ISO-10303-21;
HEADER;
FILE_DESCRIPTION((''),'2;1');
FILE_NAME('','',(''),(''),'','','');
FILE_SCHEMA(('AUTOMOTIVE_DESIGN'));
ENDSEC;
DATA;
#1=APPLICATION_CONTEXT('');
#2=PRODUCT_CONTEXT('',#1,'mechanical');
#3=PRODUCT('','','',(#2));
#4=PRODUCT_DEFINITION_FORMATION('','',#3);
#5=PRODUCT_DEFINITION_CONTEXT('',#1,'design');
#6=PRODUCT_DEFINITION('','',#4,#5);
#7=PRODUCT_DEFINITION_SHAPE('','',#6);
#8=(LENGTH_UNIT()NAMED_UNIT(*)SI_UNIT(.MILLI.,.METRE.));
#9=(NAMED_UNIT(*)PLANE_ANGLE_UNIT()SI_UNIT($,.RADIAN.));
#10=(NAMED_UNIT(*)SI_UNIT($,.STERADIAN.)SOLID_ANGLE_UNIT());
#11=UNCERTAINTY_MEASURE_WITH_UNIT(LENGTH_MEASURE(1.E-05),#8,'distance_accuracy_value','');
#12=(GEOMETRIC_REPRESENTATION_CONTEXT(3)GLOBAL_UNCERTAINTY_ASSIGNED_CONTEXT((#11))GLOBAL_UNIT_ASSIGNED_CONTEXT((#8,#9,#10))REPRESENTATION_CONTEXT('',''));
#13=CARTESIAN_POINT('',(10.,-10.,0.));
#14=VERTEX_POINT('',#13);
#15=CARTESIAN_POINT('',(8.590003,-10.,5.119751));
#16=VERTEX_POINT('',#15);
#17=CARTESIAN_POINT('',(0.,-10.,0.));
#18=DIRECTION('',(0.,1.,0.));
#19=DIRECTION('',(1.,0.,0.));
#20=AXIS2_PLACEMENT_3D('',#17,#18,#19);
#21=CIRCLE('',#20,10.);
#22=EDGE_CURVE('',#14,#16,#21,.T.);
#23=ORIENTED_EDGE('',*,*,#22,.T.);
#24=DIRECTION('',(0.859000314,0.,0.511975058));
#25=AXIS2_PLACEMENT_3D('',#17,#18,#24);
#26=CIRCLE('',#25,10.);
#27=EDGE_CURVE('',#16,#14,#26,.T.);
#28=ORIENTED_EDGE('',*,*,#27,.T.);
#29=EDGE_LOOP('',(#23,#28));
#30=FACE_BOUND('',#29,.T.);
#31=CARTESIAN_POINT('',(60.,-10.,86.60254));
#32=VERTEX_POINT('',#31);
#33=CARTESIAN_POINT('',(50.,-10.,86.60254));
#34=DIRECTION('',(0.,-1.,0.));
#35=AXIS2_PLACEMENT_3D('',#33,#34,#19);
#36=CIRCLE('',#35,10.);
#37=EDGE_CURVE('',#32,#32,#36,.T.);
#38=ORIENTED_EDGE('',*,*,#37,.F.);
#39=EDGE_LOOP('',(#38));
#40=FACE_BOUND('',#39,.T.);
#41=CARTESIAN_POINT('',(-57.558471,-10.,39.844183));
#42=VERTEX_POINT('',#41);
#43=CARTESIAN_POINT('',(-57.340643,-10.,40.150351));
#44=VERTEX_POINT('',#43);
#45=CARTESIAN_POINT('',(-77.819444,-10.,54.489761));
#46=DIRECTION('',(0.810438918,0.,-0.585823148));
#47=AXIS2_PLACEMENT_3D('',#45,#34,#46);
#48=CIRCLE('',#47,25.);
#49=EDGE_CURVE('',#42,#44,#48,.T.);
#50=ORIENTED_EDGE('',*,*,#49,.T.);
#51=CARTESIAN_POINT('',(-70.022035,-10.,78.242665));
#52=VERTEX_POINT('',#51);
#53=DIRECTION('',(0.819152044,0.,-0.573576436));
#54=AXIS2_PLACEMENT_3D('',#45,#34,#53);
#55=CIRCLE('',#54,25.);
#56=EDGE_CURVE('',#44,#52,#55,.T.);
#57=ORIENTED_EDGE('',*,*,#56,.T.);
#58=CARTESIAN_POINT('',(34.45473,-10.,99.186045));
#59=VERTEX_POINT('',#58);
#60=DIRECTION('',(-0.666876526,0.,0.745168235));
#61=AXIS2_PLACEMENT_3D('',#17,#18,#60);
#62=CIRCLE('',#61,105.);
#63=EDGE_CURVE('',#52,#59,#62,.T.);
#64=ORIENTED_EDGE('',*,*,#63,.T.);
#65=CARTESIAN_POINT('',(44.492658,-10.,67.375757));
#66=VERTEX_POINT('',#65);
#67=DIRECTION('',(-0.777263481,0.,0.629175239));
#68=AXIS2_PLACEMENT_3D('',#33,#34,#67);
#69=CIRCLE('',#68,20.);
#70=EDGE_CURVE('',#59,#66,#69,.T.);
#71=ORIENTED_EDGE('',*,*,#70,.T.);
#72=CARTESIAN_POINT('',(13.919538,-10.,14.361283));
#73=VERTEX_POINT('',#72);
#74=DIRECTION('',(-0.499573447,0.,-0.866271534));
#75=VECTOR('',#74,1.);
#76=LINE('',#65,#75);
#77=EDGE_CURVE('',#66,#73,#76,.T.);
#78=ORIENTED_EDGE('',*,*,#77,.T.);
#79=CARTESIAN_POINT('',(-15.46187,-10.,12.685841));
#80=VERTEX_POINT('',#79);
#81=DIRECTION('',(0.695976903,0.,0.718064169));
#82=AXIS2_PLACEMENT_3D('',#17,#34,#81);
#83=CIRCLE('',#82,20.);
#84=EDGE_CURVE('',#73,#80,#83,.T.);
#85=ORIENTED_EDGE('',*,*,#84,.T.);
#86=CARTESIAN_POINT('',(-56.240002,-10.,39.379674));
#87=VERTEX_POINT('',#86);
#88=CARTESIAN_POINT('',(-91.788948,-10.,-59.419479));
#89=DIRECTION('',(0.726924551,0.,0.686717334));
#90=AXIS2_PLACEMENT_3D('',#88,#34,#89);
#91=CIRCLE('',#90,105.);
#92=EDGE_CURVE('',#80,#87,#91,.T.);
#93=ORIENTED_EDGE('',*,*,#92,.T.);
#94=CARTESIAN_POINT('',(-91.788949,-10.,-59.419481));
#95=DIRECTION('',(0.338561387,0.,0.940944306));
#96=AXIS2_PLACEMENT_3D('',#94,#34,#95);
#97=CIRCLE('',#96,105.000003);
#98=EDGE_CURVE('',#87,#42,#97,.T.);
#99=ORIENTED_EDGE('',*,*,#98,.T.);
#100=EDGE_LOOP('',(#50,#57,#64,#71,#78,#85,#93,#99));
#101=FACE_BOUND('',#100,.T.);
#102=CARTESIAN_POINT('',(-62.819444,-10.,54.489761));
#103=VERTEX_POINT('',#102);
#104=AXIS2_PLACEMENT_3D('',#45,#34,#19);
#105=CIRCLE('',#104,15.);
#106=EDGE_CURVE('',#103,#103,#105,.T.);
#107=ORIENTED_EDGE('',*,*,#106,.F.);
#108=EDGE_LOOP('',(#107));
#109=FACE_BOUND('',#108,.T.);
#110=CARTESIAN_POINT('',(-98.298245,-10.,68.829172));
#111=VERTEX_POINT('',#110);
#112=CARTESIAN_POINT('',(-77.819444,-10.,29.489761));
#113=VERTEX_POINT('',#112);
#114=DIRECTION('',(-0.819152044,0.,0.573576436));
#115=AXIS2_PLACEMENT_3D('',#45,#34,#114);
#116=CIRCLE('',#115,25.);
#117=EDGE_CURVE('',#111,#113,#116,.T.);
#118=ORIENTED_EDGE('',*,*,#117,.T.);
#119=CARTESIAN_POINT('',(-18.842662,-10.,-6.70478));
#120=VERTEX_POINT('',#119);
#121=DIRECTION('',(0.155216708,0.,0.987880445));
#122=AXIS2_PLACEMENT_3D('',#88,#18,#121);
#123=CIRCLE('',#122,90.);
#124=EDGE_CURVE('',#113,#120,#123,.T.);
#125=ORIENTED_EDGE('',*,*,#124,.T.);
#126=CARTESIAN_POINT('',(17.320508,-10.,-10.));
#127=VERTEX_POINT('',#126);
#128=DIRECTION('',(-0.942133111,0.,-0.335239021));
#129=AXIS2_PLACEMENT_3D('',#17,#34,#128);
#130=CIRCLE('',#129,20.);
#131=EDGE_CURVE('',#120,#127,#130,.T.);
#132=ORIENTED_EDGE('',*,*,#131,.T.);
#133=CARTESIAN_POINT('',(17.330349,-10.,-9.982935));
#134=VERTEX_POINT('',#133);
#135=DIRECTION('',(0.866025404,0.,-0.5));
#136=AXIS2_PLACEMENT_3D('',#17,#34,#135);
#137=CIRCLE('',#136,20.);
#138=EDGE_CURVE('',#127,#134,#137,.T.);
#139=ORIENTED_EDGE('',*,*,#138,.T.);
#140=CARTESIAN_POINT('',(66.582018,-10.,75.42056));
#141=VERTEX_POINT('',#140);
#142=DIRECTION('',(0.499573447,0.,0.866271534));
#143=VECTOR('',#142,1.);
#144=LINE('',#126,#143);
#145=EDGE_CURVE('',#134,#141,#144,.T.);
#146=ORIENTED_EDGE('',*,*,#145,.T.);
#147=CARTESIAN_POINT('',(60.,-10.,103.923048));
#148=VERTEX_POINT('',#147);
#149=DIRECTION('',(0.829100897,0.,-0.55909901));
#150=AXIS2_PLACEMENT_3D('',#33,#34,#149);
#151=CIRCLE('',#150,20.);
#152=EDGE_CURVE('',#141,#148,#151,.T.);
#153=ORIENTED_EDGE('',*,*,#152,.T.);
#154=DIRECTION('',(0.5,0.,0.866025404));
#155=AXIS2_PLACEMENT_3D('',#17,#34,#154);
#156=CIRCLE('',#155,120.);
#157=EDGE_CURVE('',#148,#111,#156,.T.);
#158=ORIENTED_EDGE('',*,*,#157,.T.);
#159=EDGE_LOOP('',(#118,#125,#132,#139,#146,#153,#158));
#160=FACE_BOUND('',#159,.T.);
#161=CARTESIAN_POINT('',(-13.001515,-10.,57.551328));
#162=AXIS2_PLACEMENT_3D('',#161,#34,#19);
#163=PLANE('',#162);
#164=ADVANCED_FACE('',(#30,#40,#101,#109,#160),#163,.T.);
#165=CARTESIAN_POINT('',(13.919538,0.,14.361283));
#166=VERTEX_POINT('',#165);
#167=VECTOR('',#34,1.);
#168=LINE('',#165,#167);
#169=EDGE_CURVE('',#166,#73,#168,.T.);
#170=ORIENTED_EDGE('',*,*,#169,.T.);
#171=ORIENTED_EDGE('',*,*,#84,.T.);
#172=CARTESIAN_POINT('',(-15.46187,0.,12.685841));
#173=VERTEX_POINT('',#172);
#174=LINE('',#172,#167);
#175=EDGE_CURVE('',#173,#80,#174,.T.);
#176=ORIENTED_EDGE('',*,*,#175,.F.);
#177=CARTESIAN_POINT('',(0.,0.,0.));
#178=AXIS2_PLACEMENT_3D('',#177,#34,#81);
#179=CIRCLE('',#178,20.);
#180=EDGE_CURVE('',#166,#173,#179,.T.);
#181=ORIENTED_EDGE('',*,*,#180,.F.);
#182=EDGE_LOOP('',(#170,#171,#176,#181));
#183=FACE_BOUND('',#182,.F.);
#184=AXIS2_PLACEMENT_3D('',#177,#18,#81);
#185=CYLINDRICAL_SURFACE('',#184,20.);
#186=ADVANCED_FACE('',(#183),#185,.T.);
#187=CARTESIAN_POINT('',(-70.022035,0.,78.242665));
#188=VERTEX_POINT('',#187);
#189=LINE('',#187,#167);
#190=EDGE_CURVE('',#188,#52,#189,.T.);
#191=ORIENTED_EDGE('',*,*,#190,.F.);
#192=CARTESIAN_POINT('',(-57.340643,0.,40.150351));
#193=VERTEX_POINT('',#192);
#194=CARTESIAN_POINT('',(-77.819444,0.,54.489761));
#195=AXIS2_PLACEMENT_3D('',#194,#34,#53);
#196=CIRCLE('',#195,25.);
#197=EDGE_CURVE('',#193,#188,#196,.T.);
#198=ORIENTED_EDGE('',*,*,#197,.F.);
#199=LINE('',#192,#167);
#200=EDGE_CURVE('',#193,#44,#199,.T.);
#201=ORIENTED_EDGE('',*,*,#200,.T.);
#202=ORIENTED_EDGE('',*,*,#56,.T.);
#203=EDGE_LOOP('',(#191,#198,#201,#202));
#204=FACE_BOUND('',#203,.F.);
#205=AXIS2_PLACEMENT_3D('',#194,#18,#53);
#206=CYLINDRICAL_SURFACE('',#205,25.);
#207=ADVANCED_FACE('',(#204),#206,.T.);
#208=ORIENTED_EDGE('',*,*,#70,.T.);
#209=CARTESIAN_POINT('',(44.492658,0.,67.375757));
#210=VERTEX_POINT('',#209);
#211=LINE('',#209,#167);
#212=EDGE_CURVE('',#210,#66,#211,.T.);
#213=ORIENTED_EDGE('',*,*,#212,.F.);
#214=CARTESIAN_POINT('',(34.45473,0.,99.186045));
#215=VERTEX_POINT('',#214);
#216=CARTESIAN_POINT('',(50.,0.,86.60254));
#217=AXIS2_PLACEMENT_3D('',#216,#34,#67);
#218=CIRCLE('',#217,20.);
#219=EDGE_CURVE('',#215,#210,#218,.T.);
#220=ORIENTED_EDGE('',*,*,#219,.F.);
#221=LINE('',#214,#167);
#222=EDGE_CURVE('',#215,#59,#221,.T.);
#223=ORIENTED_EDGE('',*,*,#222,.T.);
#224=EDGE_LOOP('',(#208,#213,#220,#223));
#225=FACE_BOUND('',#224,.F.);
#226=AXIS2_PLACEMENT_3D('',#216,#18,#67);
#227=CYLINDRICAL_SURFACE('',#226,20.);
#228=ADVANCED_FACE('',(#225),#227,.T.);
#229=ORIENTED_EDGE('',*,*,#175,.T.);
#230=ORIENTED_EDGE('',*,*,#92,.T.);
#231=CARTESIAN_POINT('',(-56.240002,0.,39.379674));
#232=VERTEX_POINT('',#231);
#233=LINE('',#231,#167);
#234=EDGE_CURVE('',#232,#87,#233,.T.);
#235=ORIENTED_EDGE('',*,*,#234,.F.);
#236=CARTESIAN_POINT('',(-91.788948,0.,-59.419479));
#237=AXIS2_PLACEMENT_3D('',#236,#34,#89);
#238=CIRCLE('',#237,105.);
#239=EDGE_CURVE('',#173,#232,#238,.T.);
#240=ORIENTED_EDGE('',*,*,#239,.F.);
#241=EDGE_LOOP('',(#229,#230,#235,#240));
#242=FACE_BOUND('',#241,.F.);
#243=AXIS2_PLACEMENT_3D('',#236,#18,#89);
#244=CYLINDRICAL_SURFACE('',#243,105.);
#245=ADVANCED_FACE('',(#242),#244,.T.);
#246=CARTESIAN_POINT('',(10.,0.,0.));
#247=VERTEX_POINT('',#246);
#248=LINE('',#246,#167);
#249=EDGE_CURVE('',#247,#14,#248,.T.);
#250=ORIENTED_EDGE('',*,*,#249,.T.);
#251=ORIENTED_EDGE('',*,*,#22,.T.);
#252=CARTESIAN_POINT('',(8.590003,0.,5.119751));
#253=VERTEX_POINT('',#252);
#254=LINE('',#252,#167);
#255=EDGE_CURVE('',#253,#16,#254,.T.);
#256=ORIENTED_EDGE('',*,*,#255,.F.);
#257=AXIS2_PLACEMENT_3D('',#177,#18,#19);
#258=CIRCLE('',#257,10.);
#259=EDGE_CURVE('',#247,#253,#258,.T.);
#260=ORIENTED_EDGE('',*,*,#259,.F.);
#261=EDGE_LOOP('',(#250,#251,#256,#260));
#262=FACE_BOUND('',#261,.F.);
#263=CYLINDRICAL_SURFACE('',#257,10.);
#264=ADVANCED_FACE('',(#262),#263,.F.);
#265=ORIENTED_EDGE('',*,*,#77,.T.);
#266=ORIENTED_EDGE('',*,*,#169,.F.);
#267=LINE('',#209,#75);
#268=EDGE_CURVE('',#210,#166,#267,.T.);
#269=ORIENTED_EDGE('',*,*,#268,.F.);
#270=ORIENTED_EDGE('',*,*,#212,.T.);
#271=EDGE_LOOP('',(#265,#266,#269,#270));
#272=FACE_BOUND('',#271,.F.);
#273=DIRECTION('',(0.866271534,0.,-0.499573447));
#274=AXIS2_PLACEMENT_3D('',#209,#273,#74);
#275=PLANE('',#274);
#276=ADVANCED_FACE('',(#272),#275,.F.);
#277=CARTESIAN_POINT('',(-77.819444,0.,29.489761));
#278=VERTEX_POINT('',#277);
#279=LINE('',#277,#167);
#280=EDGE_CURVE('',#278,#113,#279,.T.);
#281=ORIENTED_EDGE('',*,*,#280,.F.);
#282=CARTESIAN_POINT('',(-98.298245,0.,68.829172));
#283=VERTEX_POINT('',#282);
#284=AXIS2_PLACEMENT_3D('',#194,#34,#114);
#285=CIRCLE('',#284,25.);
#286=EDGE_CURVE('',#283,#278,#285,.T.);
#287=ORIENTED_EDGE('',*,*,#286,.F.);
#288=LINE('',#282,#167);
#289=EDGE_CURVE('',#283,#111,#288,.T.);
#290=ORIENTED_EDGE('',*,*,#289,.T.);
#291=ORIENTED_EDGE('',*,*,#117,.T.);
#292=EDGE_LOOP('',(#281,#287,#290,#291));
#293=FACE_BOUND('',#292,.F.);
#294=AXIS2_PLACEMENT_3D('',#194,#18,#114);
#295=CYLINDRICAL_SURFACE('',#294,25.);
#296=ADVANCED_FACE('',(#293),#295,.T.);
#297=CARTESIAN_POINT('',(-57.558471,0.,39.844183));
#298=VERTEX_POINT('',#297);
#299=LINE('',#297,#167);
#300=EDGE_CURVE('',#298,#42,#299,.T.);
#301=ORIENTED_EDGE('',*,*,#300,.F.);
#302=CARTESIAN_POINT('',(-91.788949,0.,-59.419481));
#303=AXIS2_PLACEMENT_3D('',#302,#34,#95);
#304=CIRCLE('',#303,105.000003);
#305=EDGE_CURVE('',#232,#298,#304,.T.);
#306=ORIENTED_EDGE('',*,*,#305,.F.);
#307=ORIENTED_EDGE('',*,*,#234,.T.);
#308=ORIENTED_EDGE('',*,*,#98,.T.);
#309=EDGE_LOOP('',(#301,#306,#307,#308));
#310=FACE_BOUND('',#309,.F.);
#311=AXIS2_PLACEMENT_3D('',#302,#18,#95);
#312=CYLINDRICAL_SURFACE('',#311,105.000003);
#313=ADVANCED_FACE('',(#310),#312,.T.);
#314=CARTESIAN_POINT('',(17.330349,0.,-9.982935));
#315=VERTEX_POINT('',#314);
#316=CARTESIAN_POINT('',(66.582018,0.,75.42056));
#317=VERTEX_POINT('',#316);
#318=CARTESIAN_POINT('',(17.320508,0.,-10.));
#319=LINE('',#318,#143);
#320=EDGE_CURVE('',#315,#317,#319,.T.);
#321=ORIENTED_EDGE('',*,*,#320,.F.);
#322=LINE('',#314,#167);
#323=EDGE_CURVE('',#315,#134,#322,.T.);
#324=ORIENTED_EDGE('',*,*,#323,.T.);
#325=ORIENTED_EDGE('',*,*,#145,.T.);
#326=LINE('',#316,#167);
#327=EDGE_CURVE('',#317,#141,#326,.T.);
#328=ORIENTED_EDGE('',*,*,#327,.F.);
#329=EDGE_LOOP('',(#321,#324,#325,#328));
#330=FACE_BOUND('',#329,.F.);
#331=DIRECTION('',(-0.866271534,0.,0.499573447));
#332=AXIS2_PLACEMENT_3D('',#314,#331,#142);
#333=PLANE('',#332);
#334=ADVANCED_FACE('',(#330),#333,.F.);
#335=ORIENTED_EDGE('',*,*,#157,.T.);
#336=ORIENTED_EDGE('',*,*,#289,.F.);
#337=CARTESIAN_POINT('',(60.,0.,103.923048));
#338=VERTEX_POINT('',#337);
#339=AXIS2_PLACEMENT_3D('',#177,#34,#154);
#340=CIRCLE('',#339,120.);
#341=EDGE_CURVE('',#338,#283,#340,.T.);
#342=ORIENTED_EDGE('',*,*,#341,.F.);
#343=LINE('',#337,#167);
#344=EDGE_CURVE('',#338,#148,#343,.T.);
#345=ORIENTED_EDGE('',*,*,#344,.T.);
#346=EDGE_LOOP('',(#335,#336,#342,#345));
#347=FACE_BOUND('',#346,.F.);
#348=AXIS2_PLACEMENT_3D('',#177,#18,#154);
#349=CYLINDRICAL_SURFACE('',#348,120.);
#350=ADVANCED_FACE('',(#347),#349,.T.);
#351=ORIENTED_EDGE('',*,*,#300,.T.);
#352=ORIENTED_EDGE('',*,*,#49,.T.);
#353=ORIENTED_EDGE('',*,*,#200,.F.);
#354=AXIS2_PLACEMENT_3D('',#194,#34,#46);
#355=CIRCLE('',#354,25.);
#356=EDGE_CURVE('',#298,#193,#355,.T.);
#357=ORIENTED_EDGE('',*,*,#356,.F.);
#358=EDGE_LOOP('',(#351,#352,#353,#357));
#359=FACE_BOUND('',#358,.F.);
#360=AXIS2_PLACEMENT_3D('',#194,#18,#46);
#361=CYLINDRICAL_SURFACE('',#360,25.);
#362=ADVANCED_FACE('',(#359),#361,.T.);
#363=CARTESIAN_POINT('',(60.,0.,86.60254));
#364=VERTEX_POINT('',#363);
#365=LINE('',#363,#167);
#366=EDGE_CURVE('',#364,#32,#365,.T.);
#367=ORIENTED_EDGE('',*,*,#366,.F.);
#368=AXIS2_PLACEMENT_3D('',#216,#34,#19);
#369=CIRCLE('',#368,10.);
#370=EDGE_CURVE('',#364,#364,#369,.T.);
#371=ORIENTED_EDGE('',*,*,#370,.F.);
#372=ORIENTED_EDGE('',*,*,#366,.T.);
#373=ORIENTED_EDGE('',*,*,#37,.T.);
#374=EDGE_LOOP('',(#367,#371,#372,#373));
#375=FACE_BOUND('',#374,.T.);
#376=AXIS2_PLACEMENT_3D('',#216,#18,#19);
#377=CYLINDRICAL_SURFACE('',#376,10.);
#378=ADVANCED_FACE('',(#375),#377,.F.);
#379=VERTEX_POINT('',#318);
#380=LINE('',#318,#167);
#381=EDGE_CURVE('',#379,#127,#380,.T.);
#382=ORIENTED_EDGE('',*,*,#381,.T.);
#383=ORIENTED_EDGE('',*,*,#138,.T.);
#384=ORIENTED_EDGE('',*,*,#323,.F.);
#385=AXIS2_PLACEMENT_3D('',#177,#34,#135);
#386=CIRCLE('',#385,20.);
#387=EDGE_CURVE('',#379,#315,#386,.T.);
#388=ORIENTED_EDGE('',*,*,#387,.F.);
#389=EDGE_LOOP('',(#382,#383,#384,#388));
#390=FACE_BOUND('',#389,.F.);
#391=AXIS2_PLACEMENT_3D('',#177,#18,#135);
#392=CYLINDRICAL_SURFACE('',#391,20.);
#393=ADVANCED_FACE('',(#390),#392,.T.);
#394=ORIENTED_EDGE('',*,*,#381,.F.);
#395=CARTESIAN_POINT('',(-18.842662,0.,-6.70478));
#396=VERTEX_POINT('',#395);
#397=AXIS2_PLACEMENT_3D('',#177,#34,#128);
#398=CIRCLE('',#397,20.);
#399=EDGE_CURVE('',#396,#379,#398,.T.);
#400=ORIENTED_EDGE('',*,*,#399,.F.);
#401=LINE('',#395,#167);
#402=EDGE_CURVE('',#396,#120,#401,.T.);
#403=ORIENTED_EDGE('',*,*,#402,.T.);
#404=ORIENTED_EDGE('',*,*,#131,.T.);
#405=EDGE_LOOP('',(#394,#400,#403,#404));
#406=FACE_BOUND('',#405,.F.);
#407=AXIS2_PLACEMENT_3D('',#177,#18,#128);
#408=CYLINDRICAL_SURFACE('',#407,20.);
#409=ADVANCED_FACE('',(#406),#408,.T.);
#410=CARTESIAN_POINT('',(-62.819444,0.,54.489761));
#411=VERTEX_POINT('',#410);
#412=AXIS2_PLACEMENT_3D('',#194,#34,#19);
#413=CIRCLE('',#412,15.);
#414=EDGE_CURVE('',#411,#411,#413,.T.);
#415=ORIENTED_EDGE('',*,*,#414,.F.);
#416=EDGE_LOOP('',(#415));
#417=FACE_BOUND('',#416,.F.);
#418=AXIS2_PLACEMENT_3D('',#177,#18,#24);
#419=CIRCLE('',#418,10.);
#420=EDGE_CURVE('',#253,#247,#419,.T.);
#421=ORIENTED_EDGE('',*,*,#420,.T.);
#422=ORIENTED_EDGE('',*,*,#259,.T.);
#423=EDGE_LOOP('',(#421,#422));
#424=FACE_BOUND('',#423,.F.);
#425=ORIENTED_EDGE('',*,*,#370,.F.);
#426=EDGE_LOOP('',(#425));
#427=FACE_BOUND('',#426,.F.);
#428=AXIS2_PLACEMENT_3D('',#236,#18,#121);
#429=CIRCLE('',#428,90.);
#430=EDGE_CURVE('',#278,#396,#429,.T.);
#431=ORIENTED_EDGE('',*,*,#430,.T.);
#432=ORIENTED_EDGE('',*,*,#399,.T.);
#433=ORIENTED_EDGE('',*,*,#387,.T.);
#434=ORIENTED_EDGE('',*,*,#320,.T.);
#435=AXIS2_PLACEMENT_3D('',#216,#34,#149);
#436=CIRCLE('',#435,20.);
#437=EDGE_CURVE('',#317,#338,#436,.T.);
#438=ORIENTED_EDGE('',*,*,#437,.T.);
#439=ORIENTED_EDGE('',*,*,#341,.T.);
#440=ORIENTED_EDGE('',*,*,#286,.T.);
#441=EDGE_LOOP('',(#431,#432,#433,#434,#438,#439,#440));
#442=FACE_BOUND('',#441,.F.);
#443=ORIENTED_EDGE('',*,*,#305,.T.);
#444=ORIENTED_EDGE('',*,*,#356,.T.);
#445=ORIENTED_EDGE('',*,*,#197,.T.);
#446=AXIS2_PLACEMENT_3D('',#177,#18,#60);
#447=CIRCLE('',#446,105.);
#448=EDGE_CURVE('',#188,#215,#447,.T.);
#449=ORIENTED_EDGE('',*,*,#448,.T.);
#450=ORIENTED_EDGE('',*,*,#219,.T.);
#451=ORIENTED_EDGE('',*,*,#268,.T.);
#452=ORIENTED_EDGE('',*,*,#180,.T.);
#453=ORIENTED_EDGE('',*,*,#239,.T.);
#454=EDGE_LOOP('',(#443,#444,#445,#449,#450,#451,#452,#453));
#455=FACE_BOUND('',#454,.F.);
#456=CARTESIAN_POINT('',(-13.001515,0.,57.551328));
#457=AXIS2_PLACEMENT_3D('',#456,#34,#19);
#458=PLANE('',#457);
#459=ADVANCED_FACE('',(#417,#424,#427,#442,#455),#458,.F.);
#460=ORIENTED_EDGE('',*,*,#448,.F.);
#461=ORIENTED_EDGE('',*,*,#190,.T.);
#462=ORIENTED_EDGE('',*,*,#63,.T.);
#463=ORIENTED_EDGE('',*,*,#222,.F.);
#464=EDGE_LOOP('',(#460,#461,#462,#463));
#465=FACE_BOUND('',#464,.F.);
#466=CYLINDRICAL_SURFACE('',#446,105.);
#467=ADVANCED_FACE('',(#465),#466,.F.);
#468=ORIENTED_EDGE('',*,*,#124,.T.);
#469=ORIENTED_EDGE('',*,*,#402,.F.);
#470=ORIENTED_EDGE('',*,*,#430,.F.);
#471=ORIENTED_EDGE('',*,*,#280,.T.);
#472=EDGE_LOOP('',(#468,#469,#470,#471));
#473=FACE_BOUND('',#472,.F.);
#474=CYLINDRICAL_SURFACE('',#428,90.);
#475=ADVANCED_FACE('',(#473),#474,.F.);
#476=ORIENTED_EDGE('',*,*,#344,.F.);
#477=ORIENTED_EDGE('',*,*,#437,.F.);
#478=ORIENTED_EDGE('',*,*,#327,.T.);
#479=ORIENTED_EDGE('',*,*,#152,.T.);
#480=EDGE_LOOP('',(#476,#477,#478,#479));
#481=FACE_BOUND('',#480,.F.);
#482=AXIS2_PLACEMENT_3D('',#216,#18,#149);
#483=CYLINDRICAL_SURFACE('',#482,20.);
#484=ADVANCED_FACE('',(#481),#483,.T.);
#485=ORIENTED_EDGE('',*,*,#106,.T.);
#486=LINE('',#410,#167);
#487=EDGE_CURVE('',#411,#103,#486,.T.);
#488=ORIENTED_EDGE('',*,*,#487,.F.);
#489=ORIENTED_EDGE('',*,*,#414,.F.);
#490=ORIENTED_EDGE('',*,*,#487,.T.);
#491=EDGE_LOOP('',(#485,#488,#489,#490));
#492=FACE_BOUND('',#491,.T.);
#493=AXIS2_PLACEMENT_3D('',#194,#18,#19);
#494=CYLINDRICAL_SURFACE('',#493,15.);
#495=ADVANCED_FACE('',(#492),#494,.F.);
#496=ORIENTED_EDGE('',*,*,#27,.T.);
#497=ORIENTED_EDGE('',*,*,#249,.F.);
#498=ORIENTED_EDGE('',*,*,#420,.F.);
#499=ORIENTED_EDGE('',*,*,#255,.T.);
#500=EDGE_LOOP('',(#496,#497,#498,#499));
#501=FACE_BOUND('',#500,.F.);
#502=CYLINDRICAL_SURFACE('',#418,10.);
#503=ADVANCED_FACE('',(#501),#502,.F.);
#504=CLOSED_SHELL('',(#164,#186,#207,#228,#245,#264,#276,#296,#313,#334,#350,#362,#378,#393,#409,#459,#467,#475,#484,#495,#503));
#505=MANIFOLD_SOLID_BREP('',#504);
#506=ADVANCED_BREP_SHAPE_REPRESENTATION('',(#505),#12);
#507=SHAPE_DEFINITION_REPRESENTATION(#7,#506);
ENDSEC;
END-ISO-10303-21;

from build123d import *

# Parameters (mm, degrees)
F0_R     = 15
F0_R_2   = 10
F1_DEPTH = 10


# Not quite as in the source:
# - ends of sketch curves that miss each other by under 0.0002 mm in the source are joined


with BuildPart() as f1:
    # F0 (on Front) → F1 (new body)
    with BuildSketch(Plane.XZ):
        with BuildLine():
            ThreePointArc((-77.8194442075, 29.4897614533), (-44.7134784315, 17.2871063454), (-18.8426622217, -6.704780414))
            ThreePointArc((-18.8426622217, -6.704780414), (-1.8148984382, -19.9174833666), (17.3205080757, -10))
            Line((17.3205080757, -10), (17.2196907343, -9.9417930808))
            Line((17.2196907343, -9.9417930808), (18.301055835, -8.0666818038))
            Line((18.301055835, -8.0666818038), (65.8985825054, 74.4684942965))
            ThreePointArc((65.8985825054, 74.4684942965), (66.2472754238, 74.9395201306), (66.5820179406, 75.4205601863))
            ThreePointArc((66.5820179406, 75.4205601863), (69.4871465026, 91.102664953), (60, 103.9230484541))
            ThreePointArc((60, 103.9230484541), (-25.9727536726, 117.1555208544), (-98.2982453147, 68.8291723621))
            ThreePointArc((-98.2982453147, 68.8291723621), (-99.9947150369, 42.9460461225), (-77.8194442075, 29.4897614533))
        make_face()
        with BuildLine():
            ThreePointArc((8.590003141, 5.1197505835), (9.6410588477, 2.655180652), (10, 0))
            ThreePointArc((10, 0), (-9.6410588477, -2.655180652), (8.590003141, 5.1197505835))
        make_face(mode=Mode.SUBTRACT)
        with Locations((-77.8194442075, 54.4897614533)):
            Circle(F0_R, mode=Mode.SUBTRACT)
        with BuildLine():
            Line((44.4926580322, 67.3757573805), (13.9195380637, 14.3612833721))
            ThreePointArc((13.9195380637, 14.3612833721), (-1.1386278406, 19.9675618602), (-15.461870052, 12.6858414973))
            ThreePointArc((-15.461870052, 12.6858414973), (-34.2806761155, 28.431524103), (-56.2400022895, 39.3796735521))
            ThreePointArc((-56.2400022895, 39.3796735521), (-56.8984637414, 39.6141223401), (-57.5584712538, 39.84418277))
            ThreePointArc((-57.5584712538, 39.84418277), (-57.4489819567, 39.9968574072), (-57.3406431002, 40.1503505446))
            ThreePointArc((-57.3406431002, 40.1503505446), (-54.0993659231, 62.3864624217), (-70.0220352349, 78.2426647141))
            ThreePointArc((-70.0220352349, 78.2426647141), (-20.6376982657, 102.9518596738), (34.4547303835, 99.1860451586))
            ThreePointArc((34.4547303835, 99.1860451586), (30.9270685064, 80.5839621211), (44.4926580322, 67.3757573805))
        make_face(mode=Mode.SUBTRACT)
        with Locations((50, 86.6025403784)):
            Circle(F0_R_2, mode=Mode.SUBTRACT)
        with BuildLine():
            Line((17.2196907343, -9.9417930808), (17.3205080757, -10))
            ThreePointArc((17.3205080757, -10), (17.836994805, -9.0466356358), (18.301055835, -8.0666818038))
            Line((18.301055835, -8.0666818038), (17.2196907343, -9.9417930808))
        make_face()
        with BuildLine():
            ThreePointArc((18.301055835, -8.0666818038), (17.836994805, -9.0466356358), (17.3205080757, -10))
            Line((17.3205080757, -10), (66.5820179406, 75.4205601863))
            ThreePointArc((66.5820179406, 75.4205601863), (66.2472754238, 74.9395201306), (65.8985825054, 74.4684942965))
            Line((65.8985825054, 74.4684942965), (18.301055835, -8.0666818038))
        make_face()
    extrude(amount=F1_DEPTH)


solid = f1.part
